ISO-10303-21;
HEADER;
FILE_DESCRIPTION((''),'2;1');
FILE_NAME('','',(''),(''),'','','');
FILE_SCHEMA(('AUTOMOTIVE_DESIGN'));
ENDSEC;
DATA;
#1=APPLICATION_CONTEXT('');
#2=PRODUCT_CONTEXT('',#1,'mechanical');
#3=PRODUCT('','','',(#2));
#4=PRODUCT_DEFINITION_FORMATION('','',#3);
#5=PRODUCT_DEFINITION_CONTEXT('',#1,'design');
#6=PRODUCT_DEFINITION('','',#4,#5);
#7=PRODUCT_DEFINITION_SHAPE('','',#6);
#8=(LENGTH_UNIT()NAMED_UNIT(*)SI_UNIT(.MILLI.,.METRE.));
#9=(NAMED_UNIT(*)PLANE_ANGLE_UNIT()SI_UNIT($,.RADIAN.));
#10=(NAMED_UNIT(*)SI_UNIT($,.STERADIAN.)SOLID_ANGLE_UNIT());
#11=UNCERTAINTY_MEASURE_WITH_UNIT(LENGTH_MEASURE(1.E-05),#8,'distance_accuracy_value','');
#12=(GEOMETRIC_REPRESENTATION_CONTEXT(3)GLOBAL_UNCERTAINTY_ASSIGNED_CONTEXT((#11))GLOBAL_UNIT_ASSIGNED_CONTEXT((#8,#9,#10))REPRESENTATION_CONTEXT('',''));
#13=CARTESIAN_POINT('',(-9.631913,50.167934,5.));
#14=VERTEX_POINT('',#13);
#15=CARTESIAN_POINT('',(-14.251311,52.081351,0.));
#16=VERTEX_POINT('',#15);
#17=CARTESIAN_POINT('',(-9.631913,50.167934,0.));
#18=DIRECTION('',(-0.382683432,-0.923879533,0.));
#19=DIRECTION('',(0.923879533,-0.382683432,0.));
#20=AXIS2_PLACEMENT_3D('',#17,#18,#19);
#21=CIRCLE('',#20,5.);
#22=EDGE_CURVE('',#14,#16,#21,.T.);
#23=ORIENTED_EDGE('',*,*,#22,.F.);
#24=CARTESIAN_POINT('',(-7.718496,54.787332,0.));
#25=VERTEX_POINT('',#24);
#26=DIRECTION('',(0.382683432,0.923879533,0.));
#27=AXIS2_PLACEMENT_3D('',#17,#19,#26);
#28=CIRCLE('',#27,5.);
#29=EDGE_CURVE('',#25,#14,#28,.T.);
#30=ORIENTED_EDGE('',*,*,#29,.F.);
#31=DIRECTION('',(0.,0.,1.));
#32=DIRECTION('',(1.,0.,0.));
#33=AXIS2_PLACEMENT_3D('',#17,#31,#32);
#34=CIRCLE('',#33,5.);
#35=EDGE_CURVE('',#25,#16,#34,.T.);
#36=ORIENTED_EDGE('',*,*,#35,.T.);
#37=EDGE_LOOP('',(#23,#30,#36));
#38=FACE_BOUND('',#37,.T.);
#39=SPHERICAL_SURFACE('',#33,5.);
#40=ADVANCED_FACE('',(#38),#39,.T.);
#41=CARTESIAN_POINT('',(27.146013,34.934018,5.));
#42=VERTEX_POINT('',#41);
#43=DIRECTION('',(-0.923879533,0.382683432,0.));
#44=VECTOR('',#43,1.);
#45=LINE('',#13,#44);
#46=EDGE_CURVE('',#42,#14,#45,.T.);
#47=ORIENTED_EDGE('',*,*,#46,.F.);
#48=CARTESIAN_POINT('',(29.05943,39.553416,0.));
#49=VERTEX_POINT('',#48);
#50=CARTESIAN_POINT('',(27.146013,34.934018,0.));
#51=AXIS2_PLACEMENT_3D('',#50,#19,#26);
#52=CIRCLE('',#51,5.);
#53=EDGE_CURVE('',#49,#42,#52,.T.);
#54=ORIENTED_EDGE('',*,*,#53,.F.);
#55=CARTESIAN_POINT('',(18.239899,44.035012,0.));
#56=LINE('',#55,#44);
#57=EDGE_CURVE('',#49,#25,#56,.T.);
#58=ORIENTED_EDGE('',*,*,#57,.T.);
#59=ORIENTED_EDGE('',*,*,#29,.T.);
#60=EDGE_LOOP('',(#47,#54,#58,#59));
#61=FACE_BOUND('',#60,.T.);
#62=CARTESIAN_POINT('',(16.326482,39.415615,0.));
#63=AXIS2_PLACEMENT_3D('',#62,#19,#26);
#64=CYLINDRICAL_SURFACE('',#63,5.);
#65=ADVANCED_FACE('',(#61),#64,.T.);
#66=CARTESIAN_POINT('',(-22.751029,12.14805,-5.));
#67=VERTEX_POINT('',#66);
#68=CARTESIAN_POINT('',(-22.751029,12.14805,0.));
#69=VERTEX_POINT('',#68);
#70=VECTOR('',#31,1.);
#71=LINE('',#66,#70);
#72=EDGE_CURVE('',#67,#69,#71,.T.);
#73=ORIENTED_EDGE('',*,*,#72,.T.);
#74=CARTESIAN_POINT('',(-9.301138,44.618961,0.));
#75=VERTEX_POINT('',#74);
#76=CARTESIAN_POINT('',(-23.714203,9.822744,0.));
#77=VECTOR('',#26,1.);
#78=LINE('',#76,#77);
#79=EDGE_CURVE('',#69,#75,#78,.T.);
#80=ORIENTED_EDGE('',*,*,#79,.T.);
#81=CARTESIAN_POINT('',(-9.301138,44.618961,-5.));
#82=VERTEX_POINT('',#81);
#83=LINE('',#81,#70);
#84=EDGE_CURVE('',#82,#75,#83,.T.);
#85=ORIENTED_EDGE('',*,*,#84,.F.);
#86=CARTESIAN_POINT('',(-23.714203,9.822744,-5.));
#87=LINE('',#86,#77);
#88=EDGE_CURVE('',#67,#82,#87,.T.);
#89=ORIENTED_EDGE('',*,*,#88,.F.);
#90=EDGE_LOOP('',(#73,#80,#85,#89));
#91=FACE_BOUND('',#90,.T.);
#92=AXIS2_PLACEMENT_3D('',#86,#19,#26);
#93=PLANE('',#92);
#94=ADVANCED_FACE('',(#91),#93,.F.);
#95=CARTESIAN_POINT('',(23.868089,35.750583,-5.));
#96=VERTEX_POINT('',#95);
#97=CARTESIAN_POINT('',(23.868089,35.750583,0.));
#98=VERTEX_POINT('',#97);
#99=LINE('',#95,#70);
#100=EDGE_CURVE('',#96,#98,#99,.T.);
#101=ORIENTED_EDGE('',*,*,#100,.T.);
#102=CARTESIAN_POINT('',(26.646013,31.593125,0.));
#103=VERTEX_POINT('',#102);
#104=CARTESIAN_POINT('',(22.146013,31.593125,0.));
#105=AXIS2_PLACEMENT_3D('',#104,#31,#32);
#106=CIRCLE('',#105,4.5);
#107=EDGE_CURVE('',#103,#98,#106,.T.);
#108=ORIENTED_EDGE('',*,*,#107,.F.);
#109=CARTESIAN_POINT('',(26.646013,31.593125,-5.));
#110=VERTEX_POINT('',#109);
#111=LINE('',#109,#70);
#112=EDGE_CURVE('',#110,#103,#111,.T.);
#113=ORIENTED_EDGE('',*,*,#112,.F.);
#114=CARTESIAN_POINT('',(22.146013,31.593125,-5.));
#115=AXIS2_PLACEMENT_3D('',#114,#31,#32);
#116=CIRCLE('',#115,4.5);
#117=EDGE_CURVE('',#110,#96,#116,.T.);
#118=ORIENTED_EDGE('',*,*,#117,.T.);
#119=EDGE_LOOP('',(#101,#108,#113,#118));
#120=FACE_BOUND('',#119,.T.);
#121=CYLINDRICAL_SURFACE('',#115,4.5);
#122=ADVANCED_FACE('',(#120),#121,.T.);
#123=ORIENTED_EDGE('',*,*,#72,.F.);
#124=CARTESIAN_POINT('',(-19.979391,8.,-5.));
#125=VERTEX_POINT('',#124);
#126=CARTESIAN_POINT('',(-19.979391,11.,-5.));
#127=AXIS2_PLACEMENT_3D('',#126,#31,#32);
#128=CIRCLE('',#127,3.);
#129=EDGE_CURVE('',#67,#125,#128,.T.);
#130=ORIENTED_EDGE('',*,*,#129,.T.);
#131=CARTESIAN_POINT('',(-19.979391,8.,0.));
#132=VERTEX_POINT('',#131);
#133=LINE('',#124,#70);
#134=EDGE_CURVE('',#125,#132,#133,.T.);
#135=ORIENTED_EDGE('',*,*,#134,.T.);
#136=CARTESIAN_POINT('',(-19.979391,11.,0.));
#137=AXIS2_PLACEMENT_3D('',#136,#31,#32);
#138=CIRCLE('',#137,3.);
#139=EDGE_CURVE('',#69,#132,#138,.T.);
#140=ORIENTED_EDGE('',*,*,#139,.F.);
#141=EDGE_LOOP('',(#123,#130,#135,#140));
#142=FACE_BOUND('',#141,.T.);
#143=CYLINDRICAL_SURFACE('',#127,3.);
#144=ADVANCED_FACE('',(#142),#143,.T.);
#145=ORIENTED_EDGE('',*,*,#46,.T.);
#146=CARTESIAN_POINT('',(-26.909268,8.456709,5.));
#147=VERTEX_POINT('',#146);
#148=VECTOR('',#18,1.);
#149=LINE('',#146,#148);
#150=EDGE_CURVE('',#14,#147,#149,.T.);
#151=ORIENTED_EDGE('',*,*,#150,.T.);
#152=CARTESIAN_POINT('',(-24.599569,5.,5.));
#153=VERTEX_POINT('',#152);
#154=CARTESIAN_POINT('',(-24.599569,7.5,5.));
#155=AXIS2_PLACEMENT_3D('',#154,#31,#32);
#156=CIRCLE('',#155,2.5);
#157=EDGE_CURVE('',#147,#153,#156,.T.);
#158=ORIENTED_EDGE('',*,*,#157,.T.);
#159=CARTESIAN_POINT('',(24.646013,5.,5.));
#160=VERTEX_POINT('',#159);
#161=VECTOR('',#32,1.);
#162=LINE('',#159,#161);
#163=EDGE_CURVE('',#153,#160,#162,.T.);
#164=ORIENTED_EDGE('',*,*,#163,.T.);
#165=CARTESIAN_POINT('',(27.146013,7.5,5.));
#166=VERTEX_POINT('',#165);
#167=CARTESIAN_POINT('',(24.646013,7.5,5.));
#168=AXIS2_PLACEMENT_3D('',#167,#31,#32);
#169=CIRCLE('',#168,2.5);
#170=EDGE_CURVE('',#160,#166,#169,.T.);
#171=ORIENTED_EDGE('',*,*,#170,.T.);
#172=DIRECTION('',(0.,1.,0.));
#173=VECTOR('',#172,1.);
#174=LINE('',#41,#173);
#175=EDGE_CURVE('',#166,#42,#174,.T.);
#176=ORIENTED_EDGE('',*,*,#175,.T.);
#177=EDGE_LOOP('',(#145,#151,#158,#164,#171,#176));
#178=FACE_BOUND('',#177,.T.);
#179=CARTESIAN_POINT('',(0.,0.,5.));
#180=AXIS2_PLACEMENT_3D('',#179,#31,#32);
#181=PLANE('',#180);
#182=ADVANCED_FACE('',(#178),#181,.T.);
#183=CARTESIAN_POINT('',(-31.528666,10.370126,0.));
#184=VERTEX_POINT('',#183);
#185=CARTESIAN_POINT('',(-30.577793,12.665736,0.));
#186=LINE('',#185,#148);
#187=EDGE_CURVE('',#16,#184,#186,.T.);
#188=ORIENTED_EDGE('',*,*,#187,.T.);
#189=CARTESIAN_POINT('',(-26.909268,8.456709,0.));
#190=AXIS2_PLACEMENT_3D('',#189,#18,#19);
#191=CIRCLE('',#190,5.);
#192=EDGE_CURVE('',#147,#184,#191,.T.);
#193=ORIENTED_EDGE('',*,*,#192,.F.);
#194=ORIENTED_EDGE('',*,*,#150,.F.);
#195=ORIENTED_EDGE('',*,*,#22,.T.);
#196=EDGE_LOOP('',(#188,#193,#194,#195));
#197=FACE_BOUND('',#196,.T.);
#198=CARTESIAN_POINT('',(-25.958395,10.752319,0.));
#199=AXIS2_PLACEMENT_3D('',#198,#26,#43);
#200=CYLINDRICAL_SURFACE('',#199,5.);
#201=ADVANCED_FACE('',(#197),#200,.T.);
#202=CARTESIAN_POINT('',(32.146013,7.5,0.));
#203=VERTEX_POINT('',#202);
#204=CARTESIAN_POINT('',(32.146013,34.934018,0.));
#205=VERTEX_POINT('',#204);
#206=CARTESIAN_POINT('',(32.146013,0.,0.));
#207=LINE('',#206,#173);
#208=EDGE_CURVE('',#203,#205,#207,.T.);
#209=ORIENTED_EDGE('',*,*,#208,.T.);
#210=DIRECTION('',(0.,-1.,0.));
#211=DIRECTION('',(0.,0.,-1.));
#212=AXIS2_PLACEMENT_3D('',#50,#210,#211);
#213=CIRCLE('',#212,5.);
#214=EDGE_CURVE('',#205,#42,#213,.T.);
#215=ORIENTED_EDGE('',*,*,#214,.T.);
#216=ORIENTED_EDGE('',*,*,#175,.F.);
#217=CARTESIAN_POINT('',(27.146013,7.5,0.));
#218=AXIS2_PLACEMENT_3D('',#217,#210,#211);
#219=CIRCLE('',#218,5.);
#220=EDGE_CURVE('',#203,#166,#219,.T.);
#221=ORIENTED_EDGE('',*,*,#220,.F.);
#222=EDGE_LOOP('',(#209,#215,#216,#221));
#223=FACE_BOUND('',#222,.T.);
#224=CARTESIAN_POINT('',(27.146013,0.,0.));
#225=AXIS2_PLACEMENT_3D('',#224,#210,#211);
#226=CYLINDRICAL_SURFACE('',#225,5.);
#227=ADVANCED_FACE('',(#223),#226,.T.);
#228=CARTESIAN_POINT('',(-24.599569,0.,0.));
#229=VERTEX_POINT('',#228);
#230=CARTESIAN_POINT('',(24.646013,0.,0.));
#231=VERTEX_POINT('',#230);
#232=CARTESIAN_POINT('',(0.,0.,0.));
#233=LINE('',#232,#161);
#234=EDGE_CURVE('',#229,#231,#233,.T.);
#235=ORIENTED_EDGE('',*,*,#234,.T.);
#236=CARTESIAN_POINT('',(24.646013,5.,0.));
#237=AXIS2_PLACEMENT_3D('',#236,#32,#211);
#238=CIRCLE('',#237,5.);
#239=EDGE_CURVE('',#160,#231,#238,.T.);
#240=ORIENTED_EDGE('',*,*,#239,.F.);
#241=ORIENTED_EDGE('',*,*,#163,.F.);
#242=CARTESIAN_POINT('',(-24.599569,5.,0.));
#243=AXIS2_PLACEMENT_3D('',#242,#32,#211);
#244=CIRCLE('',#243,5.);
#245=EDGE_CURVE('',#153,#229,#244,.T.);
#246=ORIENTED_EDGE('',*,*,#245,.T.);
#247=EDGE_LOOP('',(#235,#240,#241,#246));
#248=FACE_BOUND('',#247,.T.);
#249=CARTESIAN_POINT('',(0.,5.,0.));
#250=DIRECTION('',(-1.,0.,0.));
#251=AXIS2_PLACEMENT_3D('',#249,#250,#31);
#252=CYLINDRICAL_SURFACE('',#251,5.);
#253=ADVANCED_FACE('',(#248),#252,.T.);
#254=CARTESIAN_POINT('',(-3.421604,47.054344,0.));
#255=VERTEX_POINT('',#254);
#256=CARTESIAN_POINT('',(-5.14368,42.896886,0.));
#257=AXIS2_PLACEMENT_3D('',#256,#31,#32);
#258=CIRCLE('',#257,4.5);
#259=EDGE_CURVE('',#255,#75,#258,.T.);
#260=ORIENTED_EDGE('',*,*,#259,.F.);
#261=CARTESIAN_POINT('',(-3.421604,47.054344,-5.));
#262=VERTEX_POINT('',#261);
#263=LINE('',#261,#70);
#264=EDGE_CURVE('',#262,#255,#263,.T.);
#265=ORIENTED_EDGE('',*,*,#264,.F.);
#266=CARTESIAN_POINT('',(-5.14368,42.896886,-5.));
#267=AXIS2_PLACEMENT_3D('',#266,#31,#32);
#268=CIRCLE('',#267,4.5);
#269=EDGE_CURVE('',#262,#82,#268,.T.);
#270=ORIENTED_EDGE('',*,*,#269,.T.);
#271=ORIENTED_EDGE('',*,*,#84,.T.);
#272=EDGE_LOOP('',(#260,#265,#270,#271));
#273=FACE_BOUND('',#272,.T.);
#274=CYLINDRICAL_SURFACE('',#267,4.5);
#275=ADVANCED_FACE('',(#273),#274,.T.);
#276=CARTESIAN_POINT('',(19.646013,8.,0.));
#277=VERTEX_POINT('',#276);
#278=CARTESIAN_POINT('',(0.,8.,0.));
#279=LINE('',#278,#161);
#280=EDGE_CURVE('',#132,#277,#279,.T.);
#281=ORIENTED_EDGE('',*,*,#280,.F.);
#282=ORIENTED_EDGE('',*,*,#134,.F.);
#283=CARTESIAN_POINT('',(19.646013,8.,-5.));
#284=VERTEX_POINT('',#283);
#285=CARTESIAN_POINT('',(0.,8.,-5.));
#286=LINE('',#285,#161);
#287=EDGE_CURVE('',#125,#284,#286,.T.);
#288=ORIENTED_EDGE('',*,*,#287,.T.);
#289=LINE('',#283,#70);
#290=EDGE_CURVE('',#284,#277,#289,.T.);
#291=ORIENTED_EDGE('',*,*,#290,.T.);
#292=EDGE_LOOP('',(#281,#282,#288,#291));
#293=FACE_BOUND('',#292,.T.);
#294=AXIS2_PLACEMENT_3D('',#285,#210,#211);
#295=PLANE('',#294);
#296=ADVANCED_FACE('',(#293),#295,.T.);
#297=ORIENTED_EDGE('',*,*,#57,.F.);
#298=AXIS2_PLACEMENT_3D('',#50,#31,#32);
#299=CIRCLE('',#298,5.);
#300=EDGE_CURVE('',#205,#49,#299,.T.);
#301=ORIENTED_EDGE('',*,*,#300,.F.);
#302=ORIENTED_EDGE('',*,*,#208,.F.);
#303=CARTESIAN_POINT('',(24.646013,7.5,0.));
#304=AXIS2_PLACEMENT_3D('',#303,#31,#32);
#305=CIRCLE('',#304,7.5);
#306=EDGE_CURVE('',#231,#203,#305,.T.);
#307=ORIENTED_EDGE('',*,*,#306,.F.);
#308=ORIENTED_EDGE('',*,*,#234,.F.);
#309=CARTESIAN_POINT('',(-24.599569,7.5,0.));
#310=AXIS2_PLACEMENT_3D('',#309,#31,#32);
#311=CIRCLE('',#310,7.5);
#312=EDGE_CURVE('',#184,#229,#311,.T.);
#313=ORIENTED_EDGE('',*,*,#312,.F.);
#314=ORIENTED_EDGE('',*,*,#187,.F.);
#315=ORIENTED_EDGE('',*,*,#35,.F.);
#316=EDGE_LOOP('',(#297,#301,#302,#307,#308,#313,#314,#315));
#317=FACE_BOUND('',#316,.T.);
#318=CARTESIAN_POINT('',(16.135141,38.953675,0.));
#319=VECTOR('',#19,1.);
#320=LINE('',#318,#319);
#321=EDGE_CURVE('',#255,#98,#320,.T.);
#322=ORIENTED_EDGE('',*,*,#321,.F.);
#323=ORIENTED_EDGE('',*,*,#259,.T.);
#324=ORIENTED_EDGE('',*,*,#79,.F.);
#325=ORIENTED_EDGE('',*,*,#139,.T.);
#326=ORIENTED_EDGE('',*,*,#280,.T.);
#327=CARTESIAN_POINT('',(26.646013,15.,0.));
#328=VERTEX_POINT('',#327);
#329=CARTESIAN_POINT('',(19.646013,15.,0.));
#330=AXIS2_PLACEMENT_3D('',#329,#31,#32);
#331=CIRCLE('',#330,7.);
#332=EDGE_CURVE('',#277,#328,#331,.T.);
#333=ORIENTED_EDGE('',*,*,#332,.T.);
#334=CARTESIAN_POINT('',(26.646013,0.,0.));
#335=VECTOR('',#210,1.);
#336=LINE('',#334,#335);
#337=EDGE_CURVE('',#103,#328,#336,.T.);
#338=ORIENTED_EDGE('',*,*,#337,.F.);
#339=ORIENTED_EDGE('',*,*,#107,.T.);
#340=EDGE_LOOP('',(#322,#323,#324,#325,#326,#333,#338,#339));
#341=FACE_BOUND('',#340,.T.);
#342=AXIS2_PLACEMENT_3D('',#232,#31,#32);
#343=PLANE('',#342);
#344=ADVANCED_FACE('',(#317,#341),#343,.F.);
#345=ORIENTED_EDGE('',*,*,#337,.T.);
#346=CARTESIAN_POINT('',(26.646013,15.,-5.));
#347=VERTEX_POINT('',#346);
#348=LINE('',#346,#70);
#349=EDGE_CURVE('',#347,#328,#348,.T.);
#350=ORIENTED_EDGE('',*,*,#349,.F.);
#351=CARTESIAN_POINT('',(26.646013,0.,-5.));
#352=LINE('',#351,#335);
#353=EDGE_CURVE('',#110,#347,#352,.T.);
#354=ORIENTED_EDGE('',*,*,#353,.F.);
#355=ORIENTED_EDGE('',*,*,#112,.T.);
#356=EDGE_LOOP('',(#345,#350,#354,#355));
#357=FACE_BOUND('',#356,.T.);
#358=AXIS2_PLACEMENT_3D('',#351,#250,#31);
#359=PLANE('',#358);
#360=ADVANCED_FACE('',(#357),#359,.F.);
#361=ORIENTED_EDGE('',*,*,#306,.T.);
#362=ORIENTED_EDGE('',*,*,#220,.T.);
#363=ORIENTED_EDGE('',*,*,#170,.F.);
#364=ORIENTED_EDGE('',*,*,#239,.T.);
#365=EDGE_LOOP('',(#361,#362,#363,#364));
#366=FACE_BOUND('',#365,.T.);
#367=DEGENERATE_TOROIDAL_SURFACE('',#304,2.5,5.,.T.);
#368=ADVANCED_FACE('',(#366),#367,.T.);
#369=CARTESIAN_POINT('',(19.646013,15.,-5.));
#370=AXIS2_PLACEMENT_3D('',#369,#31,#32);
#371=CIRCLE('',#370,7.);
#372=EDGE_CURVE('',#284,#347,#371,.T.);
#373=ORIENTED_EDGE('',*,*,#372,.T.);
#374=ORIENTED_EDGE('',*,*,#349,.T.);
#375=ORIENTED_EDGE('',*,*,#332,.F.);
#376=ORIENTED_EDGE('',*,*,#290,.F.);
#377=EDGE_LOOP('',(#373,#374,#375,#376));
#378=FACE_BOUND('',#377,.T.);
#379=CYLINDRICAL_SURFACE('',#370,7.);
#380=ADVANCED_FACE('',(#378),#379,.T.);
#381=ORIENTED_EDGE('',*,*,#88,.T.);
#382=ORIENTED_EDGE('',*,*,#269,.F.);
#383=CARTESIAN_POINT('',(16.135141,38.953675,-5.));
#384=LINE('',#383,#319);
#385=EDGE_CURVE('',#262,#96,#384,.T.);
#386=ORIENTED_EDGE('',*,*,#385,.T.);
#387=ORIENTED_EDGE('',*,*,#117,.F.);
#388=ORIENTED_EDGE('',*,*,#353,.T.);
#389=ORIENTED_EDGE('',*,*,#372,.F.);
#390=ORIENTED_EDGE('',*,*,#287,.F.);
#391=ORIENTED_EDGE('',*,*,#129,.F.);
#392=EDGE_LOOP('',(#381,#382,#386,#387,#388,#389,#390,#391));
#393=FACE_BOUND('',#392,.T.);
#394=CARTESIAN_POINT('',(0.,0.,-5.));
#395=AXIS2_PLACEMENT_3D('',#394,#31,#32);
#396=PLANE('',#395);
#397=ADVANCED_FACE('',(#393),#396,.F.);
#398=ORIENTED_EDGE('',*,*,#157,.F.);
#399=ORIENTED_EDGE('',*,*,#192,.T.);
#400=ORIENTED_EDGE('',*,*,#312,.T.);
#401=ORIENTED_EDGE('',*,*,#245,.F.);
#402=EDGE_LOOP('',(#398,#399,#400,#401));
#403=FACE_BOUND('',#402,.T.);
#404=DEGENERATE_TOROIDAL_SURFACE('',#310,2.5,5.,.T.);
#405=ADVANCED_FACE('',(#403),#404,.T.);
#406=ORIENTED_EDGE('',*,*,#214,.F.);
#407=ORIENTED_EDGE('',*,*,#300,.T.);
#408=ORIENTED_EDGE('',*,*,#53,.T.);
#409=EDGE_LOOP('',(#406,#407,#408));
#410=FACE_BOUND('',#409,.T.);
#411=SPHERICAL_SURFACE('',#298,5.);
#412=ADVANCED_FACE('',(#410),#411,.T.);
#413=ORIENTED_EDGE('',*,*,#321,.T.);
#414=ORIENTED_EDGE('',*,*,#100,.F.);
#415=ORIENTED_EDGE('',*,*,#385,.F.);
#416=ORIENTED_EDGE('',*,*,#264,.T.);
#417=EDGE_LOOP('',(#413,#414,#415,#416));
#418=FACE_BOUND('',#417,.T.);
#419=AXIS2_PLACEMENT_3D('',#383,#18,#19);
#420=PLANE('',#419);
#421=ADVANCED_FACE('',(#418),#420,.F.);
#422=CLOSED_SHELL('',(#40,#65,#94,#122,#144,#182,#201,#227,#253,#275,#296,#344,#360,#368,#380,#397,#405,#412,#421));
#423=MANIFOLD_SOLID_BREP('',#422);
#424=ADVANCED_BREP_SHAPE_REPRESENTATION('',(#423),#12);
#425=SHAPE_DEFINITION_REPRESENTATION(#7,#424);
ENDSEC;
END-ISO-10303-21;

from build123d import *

# Parameters (mm, degrees)
BOSS_EXTRUDE1_DEPTH = 5
BOSS_EXTRUDE2_DEPTH = 5
FILLET1_R           = 5


with BuildPart() as part:
    # Sketch1 → Boss-Extrude1 (new body)
    # profile 1 of 3: a face of its own
    with BuildSketch(Plane.XY):
        with BuildLine():
            Line((32.146013204, 7.5), (32.146013204, 34.934018325))
            ThreePointArc((32.146013204, 34.934018325), (31.303361266, 37.71186949), (29.059430366, 39.553415988))
            Line((29.059430366, 39.553415988), (-7.718495765, 54.787331787))
            ThreePointArc((-7.718495765, 54.787331787), (-11.545330089, 54.787331787), (-14.25131059, 52.081351287))
            Line((-14.25131059, 52.081351287), (-31.528665913, 10.370125743))
            ThreePointArc((-31.528665913, 10.370125743), (-30.835591512, 3.333223252), (-24.599569419, 0))
            Line((-24.599569419, 0), (24.646013204, 0))
            ThreePointArc((24.646013204, 0), (29.949314063, 2.196699141), (32.146013204, 7.5))
        make_face()
        with BuildLine():
            ThreePointArc((27.146013204, 31.593125136), (26.303361266, 34.370976301), (24.059430366, 36.212522798))
            Line((24.059430366, 36.212522798), (-3.230262498, 47.516283695))
            ThreePointArc((-3.230262498, 47.516283695), (-7.057096821, 47.516283695), (-9.763077322, 44.810303195))
            Line((-9.763077322, 44.810303195), (-23.212969116, 12.339392013))
            ThreePointArc((-23.212969116, 12.339392013), (-22.889534395, 9.055504184), (-19.979390752, 7.5))
            Line((-19.979390752, 7.5), (19.646013204, 7.5))
            ThreePointArc((19.646013204, 7.5), (24.949314063, 9.696699141), (27.146013204, 15))
            Line((27.146013204, 15), (27.146013204, 31.593125136))
        make_face(mode=Mode.SUBTRACT)
    # profile 2 of 3: a face of its own
    with BuildSketch(Plane.XY):
        with BuildLine():
            Line((27.146013204, 31.593125136), (27.146013204, 15))
            ThreePointArc((27.146013204, 15), (24.949314063, 9.696699141), (19.646013204, 7.5))
            Line((19.646013204, 7.5), (-19.979390752, 7.5))
            ThreePointArc((-19.979390752, 7.5), (-22.889534395, 9.055504184), (-23.212969116, 12.339392013))
            Line((-23.212969116, 12.339392013), (-9.763077322, 44.810303195))
            ThreePointArc((-9.763077322, 44.810303195), (-7.057096821, 47.516283695), (-3.230262498, 47.516283695))
            Line((-3.230262498, 47.516283695), (24.059430366, 36.212522798))
            ThreePointArc((24.059430366, 36.212522798), (26.303361266, 34.370976301), (27.146013204, 31.593125136))
        make_face()
    # profile 3 of 3: a face of its own
    with BuildSketch(Plane.XY):
        with BuildLine():
            Line((26.646013204, 31.593125136), (26.646013204, 15))
            ThreePointArc((26.646013204, 15), (24.595760673, 10.050252532), (19.646013204, 8))
            Line((19.646013204, 8), (-19.979390752, 8))
            ThreePointArc((-19.979390752, 8), (-22.473799589, 9.333289301), (-22.75102935, 12.148050297))
            Line((-22.75102935, 12.148050297), (-9.301137556, 44.618961479))
            ThreePointArc((-9.301137556, 44.618961479), (-6.865755105, 47.054343929), (-3.421604214, 47.054343929))
            Line((-3.421604214, 47.054343929), (23.86808865, 35.750583032))
            ThreePointArc((23.86808865, 35.750583032), (25.88762646, 34.093191184), (26.646013204, 31.593125136))
        make_face()
    extrude(amount=BOSS_EXTRUDE1_DEPTH)

    # Sketch1<4> → Boss-Extrude2 (add)
    with BuildSketch(Plane.XY):
        with BuildLine():
            Line((26.646013204, 31.593125136), (26.646013204, 15))
            ThreePointArc((26.646013204, 15), (24.595760673, 10.050252532), (19.646013204, 8))
            Line((19.646013204, 8), (-19.979390752, 8))
            ThreePointArc((-19.979390752, 8), (-22.473799589, 9.333289301), (-22.75102935, 12.148050297))
            Line((-22.75102935, 12.148050297), (-9.301137556, 44.618961479))
            ThreePointArc((-9.301137556, 44.618961479), (-6.865755105, 47.054343929), (-3.421604214, 47.054343929))
            Line((-3.421604214, 47.054343929), (23.86808865, 35.750583032))
            ThreePointArc((23.86808865, 35.750583032), (25.88762646, 34.093191184), (26.646013204, 31.593125136))
        make_face()
    extrude(amount=-BOSS_EXTRUDE2_DEPTH)

    # Fillet1
    fillet1_edges = [part.edges().sort_by_distance(p)[0] for p in [
        (29.949314063, 2.196699141, 5),
        (0.023221893, 0, 5),
        (-30.835591512, 3.333223252, 5),
        (-22.889988251, 31.225738515, 5),
        (-11.545330089, 54.787331787, 5),
        (10.670467301, 47.170373888, 5),
        (31.303361266, 37.71186949, 5),
        (32.146013204, 21.217009163, 5),
    ]]
    fillet(fillet1_edges, radius=FILLET1_R - 0.0001)  # a hair under: the kernel refuses the full size


solid = part.part
